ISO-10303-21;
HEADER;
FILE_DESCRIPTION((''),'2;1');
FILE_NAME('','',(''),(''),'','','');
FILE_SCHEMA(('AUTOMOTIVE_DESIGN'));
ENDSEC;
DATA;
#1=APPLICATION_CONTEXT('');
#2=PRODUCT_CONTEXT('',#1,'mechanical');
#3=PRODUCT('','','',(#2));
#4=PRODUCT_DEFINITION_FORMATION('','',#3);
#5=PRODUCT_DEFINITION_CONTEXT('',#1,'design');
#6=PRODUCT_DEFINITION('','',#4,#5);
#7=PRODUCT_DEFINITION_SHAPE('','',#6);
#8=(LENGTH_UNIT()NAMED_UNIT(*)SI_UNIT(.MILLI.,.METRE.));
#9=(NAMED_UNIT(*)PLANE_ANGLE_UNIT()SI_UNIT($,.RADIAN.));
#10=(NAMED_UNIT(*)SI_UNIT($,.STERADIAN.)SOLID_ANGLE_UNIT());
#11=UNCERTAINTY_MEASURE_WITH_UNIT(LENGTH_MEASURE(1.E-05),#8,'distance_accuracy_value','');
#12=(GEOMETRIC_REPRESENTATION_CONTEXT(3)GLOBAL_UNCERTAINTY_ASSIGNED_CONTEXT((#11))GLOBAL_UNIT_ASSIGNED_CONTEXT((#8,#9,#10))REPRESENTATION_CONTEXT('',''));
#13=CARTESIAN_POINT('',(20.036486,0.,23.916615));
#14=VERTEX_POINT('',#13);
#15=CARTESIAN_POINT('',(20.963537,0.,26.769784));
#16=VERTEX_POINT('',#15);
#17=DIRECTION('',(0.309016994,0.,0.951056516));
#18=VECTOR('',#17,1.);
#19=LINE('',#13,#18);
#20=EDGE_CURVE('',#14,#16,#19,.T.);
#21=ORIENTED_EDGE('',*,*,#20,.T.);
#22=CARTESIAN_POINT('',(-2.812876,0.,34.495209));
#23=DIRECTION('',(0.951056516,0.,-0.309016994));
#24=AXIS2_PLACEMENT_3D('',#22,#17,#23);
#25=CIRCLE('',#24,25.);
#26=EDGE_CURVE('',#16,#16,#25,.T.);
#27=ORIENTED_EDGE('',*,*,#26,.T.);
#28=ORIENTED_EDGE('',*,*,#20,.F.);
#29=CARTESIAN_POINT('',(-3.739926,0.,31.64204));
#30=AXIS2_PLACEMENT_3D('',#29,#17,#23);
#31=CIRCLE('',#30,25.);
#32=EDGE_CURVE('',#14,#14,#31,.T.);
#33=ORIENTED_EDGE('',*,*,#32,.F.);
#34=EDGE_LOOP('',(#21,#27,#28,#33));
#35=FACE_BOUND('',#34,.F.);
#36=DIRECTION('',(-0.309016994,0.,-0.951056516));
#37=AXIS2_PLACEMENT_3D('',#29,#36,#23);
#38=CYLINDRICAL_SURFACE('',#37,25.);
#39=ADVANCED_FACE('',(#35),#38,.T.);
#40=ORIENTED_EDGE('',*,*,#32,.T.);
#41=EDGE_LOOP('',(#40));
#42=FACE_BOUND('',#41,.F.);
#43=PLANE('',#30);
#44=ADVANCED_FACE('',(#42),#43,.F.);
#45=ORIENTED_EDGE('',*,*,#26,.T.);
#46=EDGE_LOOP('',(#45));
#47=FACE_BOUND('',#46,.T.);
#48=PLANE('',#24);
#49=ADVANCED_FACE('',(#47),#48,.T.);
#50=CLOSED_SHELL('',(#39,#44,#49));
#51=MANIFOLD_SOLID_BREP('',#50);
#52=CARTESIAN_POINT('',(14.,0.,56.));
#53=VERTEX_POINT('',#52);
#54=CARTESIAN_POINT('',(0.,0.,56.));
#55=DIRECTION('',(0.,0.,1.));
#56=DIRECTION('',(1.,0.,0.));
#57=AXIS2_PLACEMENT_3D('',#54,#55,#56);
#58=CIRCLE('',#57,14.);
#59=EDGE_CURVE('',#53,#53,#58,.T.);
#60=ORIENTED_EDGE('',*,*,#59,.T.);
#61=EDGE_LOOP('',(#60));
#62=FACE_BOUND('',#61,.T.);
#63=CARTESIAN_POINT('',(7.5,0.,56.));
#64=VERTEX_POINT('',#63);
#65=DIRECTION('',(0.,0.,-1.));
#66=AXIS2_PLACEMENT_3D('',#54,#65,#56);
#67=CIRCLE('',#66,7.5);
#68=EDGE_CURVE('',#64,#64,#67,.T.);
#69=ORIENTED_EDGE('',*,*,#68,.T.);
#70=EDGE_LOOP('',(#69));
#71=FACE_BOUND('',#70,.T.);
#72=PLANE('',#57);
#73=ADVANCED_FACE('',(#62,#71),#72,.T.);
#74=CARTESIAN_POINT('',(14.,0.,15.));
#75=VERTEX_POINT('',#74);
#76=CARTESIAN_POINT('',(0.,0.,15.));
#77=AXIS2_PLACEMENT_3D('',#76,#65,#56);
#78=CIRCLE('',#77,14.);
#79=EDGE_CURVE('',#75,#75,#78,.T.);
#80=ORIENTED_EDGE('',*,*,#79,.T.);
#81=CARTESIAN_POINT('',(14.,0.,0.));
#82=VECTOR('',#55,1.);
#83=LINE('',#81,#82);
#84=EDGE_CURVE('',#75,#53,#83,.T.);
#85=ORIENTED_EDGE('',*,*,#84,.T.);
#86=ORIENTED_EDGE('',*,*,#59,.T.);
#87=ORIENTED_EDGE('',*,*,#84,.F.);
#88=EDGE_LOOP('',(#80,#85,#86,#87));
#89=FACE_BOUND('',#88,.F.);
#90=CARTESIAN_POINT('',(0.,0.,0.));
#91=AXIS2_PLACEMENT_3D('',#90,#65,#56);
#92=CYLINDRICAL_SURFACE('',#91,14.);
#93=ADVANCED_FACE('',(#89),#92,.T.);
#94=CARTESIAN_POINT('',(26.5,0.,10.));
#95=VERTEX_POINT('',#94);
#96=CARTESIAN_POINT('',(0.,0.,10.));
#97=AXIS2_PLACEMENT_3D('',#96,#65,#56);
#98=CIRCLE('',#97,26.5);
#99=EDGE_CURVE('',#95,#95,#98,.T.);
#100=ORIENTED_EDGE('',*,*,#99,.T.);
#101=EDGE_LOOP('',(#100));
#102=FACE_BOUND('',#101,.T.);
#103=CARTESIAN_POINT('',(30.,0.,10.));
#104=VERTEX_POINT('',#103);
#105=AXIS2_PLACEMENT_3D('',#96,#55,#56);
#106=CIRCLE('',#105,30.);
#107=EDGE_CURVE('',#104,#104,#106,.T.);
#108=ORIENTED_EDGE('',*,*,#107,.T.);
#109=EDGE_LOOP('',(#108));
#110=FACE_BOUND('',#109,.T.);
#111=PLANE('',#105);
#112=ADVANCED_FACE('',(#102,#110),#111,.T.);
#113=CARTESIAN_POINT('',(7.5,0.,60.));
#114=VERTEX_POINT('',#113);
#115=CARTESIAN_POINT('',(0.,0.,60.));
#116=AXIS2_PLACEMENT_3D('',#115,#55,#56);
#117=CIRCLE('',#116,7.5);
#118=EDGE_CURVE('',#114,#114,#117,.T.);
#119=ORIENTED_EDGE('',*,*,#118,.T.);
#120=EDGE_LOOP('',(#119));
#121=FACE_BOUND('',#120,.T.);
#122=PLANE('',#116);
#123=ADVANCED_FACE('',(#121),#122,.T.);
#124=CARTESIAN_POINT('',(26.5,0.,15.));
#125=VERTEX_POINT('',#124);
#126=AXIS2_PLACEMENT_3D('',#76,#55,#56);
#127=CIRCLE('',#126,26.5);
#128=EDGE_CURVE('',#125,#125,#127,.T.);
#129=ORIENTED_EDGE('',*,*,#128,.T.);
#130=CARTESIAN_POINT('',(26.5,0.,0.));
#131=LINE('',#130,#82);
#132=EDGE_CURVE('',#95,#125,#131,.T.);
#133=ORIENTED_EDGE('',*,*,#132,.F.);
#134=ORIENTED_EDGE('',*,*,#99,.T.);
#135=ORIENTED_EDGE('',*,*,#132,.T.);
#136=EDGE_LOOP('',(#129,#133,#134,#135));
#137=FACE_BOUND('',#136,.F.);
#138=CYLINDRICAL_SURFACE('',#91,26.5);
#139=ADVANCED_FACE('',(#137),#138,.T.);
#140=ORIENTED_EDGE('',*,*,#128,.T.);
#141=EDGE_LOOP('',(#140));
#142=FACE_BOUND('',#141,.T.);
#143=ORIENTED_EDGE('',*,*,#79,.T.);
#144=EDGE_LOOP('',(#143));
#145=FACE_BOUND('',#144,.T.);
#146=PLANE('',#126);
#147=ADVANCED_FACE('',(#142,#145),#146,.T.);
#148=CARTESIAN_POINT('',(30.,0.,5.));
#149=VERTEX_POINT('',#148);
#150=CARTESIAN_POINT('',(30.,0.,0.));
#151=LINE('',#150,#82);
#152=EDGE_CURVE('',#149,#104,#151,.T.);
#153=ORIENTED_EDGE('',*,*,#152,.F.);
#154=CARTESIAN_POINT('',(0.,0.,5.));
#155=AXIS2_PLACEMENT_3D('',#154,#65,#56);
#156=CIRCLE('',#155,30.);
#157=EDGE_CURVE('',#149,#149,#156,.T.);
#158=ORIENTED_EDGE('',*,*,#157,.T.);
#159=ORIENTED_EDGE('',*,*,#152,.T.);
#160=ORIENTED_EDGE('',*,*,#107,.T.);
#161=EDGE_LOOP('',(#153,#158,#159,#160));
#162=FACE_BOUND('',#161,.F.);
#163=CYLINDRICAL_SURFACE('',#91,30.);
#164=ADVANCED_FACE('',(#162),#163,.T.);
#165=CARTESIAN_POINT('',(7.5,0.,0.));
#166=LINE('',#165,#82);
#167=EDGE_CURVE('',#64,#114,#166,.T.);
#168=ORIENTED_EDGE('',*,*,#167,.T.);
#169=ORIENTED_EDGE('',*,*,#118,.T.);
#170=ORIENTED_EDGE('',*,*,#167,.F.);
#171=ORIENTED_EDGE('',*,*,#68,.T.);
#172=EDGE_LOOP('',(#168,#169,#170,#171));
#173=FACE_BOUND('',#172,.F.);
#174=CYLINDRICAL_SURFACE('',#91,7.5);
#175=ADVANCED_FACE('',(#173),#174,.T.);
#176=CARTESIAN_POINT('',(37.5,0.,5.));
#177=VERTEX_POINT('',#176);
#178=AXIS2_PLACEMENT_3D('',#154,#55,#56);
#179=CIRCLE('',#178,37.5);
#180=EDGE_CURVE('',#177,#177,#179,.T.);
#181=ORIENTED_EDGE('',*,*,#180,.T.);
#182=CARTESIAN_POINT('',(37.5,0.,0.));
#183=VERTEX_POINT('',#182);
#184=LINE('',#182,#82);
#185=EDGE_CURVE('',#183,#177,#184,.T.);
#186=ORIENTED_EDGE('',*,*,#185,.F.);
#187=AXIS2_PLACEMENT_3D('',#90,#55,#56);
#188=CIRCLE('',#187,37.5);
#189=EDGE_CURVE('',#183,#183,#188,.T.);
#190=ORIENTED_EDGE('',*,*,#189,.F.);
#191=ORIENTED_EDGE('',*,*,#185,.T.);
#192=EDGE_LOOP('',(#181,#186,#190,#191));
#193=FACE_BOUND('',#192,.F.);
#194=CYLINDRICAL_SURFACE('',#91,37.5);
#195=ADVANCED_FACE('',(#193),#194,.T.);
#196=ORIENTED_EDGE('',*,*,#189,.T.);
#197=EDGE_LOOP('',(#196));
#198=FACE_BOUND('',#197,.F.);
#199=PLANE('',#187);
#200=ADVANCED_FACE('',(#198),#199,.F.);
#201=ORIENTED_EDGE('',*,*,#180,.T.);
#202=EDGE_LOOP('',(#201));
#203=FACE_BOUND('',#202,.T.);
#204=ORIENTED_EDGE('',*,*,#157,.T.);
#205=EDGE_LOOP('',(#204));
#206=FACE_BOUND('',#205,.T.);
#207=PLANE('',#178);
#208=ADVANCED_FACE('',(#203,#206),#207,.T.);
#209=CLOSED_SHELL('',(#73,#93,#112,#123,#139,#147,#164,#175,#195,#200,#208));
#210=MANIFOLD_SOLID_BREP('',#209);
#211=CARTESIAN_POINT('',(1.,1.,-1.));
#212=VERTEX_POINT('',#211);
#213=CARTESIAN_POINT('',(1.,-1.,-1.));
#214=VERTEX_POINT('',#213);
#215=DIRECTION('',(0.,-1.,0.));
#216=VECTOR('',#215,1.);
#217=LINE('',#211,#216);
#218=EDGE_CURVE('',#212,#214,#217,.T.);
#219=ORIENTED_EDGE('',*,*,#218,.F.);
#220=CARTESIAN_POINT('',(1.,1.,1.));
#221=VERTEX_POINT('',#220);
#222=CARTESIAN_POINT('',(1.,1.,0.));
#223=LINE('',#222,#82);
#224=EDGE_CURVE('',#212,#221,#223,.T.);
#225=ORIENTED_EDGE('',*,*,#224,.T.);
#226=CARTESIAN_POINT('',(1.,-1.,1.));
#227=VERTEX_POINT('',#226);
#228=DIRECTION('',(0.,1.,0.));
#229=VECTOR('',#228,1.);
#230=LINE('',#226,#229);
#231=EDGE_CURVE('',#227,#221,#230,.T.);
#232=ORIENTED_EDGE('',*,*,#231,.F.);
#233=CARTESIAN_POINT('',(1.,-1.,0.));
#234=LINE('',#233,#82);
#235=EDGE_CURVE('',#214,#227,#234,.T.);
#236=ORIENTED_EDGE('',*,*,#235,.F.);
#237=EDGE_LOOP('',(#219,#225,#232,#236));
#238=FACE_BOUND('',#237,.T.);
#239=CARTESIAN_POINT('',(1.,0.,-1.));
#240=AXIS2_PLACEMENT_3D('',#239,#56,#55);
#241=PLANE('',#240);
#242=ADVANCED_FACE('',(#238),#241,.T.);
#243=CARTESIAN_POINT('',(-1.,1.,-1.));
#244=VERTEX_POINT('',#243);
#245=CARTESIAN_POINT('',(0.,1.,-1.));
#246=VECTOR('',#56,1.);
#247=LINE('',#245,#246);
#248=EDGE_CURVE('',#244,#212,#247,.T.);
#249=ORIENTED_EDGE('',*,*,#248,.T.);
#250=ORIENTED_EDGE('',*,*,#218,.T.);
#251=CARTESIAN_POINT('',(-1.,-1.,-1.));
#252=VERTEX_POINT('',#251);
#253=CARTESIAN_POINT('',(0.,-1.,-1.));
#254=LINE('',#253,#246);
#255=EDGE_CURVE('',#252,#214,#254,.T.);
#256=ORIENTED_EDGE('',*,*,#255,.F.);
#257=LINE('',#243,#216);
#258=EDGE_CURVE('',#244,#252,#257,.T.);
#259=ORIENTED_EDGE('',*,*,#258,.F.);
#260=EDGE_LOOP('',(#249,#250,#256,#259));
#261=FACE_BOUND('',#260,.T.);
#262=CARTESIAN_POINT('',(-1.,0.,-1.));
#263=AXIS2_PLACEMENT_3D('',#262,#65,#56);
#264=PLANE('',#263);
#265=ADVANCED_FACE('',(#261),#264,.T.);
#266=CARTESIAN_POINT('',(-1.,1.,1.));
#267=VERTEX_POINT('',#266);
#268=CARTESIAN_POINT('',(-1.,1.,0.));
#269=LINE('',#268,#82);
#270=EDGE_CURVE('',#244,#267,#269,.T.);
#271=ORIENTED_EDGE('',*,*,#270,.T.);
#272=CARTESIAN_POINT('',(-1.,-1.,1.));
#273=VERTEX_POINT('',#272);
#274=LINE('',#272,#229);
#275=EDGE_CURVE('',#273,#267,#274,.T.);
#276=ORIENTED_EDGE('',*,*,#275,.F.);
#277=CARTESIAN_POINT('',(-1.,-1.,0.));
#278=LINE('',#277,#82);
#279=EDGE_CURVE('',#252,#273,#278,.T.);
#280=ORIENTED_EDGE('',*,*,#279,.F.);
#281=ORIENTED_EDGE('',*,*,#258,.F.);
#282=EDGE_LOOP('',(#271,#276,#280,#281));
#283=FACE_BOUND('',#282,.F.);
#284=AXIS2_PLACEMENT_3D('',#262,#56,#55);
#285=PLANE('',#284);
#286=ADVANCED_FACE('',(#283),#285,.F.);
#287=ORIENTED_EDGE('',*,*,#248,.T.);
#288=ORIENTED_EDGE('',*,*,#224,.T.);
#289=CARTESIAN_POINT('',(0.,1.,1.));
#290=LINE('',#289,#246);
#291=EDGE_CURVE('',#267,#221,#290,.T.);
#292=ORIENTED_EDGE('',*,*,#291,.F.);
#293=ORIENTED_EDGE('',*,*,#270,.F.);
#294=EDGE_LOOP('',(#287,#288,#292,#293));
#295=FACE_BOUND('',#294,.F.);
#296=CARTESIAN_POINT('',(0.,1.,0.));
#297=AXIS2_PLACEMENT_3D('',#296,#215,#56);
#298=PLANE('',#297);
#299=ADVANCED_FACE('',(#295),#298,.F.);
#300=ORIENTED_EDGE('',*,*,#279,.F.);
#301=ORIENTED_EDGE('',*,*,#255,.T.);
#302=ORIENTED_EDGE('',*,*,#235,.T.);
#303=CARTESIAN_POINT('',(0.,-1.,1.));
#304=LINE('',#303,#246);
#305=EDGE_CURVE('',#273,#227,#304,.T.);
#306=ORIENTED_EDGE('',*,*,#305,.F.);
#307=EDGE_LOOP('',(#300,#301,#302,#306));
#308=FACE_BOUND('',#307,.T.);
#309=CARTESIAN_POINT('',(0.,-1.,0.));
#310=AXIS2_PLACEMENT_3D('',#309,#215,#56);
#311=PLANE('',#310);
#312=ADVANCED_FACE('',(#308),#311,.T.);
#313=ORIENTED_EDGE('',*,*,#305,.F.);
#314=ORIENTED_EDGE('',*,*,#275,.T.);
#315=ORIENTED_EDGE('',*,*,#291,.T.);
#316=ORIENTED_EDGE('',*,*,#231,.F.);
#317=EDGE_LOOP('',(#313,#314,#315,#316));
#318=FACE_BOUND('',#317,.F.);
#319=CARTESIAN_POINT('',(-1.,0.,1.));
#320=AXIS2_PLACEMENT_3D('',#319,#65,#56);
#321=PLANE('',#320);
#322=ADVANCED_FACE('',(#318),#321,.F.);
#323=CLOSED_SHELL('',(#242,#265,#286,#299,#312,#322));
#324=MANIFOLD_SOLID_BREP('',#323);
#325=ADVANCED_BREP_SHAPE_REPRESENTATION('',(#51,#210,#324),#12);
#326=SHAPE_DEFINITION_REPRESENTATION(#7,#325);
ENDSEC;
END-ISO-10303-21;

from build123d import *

# Parameters (mm, degrees)
F0_W      = 2
F0_H      = 2
F1_DEPTH  = 1
F2_R      = 7.5
F3_DEPTH  = 60
F4_R      = 14
F5_DEPTH  = 56
F6_R      = 37.5
F7_DEPTH  = 5
F8_R      = 30
F9_DEPTH  = 10
F10_R     = 26.5
F11_DEPTH = 15
F12_R     = 25
F13_DEPTH = 3
F14_ANGLE = 18


with BuildPart() as f1:
    # F0 (on Front) → F1 (new body, symmetric)
    with BuildSketch(Plane.XZ):
        Rectangle(F0_W, F0_H)
    extrude(amount=F1_DEPTH, both=True)


with BuildPart() as f3:
    # F2 (on Top) → F3 (new body)
    with BuildSketch(Plane.XY):
        Circle(F2_R)
    extrude(amount=F3_DEPTH)

    # F4 (on Top) → F5 (join)
    with BuildSketch(Plane.XY):
        Circle(F4_R)
    extrude(amount=F5_DEPTH)

    # F6 (on Top) → F7 (join)
    with BuildSketch(Plane.XY):
        Circle(F6_R)
    extrude(amount=F7_DEPTH)

    # F8 (on Top) → F9 (join)
    with BuildSketch(Plane.XY):
        Circle(F8_R)
    extrude(amount=F9_DEPTH)

    # F10 (on Top) → F11 (join)
    with BuildSketch(Plane.XY):
        Circle(F10_R)
    extrude(amount=F11_DEPTH)


with BuildPart() as f13:
    # F12 (on Top) → F13 (new body)
    with BuildSketch(Plane.XY):
        Circle(F12_R)
    extrude(amount=F13_DEPTH)


with BuildPart() as f13_1:
    # F14: moved
    add(f13.part.rotate(Axis((-1, 0, -1), (0, 1, 0)), F14_ANGLE))


with BuildPart() as f13_2:
    # F15: moved
    add(f13_1.part.moved(Location((-4, 0, 32))))


solid = Compound([f1.part, f3.part, f13_2.part])
